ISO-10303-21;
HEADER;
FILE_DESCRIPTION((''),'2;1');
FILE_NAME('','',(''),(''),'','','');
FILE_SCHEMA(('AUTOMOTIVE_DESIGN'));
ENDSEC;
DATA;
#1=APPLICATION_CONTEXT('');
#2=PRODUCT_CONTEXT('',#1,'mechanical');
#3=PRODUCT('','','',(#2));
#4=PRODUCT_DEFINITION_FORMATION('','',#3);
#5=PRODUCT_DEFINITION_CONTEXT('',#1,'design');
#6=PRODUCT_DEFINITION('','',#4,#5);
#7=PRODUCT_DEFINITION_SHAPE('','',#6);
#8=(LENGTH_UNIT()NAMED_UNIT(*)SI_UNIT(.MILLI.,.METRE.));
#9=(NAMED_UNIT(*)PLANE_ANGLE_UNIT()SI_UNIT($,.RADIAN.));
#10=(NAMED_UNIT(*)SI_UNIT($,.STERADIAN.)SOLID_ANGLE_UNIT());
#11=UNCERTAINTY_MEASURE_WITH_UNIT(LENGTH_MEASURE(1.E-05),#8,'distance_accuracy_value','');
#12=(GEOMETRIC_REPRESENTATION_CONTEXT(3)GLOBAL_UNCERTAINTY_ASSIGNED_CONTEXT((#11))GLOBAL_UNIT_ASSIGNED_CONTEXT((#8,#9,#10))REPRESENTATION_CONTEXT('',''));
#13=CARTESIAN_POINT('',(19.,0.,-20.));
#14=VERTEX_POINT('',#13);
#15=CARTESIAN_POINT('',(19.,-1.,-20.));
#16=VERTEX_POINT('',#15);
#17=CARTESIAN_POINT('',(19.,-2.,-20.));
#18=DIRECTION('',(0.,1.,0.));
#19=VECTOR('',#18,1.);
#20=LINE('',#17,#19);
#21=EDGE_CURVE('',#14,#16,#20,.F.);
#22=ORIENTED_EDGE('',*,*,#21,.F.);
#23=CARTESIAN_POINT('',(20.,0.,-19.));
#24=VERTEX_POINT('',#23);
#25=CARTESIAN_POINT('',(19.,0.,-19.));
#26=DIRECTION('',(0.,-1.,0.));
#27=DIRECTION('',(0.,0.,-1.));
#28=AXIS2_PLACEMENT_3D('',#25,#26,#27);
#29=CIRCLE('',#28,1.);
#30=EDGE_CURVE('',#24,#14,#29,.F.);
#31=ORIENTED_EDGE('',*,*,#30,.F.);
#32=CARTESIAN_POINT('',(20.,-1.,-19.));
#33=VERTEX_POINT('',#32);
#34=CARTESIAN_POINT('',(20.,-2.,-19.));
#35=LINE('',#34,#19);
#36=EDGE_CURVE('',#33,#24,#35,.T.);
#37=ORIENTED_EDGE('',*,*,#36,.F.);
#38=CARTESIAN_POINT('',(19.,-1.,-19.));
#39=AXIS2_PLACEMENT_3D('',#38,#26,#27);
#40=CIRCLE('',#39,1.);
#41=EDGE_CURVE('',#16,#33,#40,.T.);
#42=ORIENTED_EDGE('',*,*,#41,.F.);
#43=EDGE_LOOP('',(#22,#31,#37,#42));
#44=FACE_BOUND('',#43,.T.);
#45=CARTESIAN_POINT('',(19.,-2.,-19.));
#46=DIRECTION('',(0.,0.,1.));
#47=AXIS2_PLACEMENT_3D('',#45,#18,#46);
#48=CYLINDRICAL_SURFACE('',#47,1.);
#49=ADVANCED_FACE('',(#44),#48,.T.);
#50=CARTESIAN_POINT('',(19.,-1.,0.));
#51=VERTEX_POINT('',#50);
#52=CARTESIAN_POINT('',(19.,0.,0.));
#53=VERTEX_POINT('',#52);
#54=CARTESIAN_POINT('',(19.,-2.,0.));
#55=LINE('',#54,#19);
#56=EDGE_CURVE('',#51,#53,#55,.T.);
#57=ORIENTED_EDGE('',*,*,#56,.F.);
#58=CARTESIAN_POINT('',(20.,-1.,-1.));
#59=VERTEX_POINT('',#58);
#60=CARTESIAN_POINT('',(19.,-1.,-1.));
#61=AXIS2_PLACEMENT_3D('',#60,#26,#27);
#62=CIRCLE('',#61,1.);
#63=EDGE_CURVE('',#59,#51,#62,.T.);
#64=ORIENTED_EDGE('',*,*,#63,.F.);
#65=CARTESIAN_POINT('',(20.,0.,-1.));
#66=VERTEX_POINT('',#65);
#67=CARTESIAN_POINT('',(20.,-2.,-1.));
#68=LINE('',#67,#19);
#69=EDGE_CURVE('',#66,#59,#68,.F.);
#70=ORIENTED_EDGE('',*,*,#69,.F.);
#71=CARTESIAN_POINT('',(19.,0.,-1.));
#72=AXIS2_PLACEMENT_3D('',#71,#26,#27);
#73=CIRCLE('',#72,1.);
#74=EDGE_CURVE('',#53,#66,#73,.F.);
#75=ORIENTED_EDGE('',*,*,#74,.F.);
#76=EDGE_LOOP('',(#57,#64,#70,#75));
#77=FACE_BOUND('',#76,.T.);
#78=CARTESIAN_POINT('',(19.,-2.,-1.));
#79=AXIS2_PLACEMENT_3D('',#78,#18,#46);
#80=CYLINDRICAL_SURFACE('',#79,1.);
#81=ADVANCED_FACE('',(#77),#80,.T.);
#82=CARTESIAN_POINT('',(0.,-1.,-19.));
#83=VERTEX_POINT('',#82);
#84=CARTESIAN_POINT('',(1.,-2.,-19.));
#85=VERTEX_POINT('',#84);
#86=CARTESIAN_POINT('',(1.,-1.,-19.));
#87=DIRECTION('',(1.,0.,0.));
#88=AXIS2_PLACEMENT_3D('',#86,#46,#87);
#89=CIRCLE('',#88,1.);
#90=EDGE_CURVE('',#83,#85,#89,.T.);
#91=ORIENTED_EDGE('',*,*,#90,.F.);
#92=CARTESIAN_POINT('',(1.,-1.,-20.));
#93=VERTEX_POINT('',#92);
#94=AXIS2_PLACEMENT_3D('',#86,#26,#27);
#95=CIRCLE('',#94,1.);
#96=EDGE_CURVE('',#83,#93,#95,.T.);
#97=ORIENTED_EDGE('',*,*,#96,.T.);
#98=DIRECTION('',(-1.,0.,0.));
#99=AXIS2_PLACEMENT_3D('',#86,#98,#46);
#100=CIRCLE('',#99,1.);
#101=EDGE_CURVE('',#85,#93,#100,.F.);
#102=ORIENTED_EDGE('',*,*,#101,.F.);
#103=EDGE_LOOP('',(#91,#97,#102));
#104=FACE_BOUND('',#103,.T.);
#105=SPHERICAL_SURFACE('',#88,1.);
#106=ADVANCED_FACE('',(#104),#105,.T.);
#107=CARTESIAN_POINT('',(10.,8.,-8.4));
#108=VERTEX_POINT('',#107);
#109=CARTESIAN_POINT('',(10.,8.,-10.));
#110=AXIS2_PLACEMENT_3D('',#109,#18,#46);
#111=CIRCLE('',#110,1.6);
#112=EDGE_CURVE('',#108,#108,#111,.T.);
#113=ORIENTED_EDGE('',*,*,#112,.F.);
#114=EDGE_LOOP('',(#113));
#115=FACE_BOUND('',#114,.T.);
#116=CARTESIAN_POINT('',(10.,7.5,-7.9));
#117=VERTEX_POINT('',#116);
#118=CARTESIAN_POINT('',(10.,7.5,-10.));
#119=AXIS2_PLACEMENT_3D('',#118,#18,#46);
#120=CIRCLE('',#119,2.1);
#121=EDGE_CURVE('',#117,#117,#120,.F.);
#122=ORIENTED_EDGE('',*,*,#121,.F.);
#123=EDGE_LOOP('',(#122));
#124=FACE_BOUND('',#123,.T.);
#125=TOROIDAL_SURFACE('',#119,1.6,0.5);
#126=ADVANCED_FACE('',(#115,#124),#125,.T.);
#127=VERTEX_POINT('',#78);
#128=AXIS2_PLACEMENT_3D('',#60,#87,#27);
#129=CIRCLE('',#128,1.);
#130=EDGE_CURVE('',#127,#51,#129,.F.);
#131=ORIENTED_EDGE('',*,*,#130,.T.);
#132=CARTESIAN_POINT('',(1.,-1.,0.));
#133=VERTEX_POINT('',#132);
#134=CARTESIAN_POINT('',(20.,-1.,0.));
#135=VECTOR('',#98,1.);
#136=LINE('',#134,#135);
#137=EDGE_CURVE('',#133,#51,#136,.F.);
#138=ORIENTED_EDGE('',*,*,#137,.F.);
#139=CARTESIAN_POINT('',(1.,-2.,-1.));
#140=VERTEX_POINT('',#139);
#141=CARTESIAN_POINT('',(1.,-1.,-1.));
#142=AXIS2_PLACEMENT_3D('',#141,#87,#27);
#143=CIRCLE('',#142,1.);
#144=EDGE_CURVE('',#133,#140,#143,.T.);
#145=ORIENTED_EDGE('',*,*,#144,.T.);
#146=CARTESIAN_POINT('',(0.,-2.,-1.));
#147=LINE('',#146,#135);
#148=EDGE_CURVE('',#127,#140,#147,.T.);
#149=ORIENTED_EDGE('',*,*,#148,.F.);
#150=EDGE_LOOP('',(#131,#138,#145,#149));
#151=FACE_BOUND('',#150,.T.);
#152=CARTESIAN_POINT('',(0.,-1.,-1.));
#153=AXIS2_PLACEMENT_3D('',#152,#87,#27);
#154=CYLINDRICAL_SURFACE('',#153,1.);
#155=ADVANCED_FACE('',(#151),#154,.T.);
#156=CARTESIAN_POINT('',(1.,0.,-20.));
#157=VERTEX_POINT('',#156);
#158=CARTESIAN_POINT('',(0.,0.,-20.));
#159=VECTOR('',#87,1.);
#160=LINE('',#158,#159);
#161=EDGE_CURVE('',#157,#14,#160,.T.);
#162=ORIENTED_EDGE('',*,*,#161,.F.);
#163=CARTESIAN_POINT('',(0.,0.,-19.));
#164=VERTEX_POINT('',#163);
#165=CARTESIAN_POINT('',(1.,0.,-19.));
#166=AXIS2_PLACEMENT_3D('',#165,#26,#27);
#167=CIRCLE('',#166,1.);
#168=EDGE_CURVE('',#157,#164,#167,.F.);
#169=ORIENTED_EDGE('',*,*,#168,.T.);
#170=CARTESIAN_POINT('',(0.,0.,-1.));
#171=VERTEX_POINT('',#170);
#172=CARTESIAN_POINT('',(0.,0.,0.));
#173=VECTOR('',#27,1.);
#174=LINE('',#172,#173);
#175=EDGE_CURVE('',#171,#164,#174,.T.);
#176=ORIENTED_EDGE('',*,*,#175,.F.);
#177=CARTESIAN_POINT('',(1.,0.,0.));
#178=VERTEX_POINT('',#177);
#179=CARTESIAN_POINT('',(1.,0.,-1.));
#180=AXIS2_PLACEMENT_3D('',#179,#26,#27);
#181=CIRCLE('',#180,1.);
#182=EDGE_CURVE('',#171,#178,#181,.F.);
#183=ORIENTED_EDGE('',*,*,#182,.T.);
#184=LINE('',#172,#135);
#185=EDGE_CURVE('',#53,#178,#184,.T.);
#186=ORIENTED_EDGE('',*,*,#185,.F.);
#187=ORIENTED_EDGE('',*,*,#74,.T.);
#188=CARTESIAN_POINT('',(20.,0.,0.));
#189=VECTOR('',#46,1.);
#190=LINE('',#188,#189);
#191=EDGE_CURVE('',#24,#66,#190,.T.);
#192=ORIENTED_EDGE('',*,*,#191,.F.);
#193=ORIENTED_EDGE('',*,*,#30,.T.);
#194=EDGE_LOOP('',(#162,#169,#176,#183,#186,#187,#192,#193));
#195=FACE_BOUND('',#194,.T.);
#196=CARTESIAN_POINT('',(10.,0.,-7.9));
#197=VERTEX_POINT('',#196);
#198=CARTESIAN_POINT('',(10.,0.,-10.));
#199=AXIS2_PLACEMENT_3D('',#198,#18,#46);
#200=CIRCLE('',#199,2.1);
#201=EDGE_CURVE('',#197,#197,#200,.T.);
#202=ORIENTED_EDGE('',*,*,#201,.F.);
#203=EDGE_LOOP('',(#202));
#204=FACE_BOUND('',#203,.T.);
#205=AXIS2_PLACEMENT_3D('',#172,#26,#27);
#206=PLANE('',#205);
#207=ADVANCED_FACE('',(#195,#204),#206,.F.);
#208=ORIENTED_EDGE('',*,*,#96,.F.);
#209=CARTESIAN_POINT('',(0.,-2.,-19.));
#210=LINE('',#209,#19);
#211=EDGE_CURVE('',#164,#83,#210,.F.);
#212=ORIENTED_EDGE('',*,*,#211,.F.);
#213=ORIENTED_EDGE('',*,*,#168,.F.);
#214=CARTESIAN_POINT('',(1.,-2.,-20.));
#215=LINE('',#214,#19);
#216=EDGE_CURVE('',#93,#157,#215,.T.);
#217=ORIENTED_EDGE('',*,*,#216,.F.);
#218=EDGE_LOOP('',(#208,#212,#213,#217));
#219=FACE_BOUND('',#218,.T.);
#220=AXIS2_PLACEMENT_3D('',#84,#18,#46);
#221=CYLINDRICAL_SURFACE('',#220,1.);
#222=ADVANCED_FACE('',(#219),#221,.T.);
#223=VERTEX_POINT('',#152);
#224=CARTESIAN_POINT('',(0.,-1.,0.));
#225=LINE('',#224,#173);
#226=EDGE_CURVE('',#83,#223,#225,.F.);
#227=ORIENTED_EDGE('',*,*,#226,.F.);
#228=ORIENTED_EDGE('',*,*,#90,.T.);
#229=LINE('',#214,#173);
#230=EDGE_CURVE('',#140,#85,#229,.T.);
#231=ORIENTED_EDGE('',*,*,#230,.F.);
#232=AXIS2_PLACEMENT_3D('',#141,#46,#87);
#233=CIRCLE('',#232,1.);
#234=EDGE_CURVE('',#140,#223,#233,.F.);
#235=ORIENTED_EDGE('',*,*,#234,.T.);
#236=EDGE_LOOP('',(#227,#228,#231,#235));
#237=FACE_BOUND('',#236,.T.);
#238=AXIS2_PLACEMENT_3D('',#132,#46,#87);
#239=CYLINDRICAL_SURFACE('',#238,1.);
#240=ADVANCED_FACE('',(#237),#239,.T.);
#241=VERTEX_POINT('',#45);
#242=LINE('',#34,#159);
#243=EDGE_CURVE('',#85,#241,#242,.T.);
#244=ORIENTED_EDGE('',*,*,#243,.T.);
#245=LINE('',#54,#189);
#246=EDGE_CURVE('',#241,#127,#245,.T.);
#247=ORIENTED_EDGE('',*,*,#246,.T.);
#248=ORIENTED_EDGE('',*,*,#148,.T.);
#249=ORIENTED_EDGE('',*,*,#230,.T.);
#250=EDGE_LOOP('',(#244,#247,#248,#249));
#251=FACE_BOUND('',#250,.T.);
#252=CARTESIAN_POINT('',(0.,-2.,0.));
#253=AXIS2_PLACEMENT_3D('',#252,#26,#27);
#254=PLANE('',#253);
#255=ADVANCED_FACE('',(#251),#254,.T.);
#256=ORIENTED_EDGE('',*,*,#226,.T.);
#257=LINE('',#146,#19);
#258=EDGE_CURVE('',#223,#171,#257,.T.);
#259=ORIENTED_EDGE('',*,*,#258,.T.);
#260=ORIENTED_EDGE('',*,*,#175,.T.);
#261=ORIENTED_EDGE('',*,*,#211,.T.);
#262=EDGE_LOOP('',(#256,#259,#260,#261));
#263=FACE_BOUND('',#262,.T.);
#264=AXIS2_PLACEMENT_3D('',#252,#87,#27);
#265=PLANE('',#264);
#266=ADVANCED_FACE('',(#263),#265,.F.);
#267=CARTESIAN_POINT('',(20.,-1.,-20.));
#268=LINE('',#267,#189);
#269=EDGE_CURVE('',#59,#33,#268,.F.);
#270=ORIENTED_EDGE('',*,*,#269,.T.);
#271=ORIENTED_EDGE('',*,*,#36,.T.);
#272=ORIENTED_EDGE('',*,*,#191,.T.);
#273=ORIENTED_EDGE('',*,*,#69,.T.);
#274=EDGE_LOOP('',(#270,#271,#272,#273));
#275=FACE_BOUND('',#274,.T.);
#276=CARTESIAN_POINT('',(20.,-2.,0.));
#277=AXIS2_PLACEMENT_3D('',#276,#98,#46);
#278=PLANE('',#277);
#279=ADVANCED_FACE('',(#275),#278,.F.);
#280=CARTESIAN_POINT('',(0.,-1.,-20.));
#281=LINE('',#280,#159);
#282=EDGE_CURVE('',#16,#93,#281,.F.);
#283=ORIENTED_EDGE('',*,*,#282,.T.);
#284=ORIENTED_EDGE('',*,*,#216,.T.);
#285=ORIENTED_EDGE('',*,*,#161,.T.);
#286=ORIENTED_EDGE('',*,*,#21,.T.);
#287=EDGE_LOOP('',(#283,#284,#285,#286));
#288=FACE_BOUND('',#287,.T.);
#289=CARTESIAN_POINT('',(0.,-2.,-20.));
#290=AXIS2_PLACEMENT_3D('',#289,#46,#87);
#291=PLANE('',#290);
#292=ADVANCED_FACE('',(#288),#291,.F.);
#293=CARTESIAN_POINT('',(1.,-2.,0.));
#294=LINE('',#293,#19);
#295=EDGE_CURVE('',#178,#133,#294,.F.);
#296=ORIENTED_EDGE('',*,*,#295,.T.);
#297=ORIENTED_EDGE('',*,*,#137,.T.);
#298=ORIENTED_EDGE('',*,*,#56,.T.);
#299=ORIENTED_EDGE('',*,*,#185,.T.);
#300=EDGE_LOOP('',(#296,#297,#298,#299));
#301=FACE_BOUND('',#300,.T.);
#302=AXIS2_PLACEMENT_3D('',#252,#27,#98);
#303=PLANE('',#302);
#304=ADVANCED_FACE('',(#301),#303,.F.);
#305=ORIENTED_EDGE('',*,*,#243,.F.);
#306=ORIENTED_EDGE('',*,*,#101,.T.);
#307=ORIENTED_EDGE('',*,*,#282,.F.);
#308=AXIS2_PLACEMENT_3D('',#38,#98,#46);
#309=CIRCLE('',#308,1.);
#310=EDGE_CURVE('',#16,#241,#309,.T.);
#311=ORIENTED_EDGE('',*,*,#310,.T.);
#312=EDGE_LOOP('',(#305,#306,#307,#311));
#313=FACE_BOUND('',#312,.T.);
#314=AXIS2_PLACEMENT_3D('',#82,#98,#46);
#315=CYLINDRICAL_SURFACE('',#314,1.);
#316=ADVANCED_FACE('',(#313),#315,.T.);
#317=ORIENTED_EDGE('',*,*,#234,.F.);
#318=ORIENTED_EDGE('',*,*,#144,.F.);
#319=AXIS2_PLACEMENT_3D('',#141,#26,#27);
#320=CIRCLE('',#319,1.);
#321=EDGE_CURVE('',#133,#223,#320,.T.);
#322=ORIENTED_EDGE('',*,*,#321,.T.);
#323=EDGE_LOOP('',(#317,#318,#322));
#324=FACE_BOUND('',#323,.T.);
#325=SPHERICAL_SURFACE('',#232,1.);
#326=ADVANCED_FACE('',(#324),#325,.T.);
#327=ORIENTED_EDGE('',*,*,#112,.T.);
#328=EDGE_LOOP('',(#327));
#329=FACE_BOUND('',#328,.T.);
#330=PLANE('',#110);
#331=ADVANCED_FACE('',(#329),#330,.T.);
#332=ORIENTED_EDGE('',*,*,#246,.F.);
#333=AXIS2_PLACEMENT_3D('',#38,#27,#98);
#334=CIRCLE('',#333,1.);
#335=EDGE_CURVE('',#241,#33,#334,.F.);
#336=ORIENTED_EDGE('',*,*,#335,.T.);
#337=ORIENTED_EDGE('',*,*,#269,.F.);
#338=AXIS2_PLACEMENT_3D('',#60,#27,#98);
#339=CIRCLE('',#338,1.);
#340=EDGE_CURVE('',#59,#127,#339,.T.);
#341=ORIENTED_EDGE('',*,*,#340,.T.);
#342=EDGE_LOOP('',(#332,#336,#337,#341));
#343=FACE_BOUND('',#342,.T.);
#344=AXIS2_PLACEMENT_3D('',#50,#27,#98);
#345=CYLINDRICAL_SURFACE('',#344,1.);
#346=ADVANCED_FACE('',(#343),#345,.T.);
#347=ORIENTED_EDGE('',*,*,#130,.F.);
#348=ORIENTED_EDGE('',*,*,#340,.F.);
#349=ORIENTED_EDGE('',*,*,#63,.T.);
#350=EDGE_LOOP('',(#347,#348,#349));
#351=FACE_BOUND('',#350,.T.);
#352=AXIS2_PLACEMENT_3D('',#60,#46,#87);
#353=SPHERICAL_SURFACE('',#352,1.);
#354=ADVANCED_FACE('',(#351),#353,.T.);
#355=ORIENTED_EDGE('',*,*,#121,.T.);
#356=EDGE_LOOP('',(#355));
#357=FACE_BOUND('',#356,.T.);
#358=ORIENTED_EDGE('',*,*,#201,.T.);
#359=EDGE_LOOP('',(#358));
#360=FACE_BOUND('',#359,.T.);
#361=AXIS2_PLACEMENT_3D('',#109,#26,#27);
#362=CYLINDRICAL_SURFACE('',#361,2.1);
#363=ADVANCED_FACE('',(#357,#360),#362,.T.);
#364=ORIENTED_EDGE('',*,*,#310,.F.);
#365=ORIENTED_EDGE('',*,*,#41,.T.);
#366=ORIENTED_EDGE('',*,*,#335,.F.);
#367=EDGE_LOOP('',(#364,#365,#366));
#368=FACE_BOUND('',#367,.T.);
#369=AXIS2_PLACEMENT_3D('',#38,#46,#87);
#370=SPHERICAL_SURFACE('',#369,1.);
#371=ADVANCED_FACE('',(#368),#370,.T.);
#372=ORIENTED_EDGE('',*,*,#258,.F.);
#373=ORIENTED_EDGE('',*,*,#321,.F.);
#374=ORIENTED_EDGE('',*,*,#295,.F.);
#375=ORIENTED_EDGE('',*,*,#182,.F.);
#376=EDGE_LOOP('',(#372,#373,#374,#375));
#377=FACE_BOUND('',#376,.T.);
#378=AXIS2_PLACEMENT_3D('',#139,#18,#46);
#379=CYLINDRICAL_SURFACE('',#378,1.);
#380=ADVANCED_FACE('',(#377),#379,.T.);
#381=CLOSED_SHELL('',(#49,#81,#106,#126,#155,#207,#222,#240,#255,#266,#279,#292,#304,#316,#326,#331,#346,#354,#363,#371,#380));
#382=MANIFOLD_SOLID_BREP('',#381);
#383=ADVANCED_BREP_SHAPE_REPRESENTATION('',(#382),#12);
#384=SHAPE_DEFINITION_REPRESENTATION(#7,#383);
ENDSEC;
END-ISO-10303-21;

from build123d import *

# Parameters (mm, degrees)
SKETCH1_R           = 2.1
BOSS_EXTRUDE1_DEPTH = 8
SKETCH2_W           = 20
SKETCH2_H           = 20
BOSS_EXTRUDE2_DEPTH = 2
FILLET1_R           = 1
FILLET2_R           = 0.5
FILLET3_R           = 1


with BuildPart() as part:
    # Sketch1 → Boss-Extrude1 (new body)
    with BuildSketch(Plane(origin=(0, 0, 0), x_dir=(1, 0, 0), z_dir=(0, 1, 0))):
        with Locations(Location((10, 10, 0), (0, 0, 270))):
            Circle(SKETCH1_R)
    extrude(amount=BOSS_EXTRUDE1_DEPTH)

    # Sketch2 → Boss-Extrude2 (add)
    with BuildSketch(Plane.XZ):
        with Locations((10, -10)):
            Rectangle(SKETCH2_W, SKETCH2_H)
    extrude(amount=BOSS_EXTRUDE2_DEPTH)

    # Fillet1
    fillet1_edges = [part.edges().sort_by_distance(p)[0] for p in [
        (0, -2, -10),
        (10, -2, -20),
        (20, -2, -10),
        (10, -2, 0),
    ]]
    fillet(fillet1_edges, radius=FILLET1_R)

    # Fillet2
    fillet2_edges = [part.edges().sort_by_distance(p)[0] for p in [
        (10, 8, -12.1),
    ]]
    fillet(fillet2_edges, radius=FILLET2_R)

    # Fillet3
    # the kernel refuses this fillet: 1 mm, written as the material it takes off along each edge
    with BuildSketch(Plane(origin=(19, -1, -19), x_dir=(0, 0, -1), z_dir=(1, 0, 0))) as fillet3_piece_1_section:
        Polygon((0, 0), (FILLET3_R, 0), (FILLET3_R, -FILLET3_R), (0, -FILLET3_R), align=None)
    fillet3_piece_1 = extrude(amount=FILLET3_R, mode=Mode.PRIVATE)
    fillet3_piece_1 = fillet3_piece_1 - Plane(origin=(19, -1, -19), x_dir=(0, 0.7071067811865475, 0.7071067811865475), z_dir=(1, 0, 0)) * Sphere(FILLET3_R, mode=Mode.PRIVATE)
    add(fillet3_piece_1, mode=Mode.SUBTRACT)
    with BuildSketch(Plane(origin=(1, -1, -19), x_dir=(0, 0, -1), z_dir=(-1, 0, 0))) as fillet3_piece_2_section:
        Polygon((0, 0), (FILLET3_R, 0), (FILLET3_R, FILLET3_R), (0, FILLET3_R), align=None)
    fillet3_piece_2 = extrude(amount=FILLET3_R, mode=Mode.PRIVATE)
    fillet3_piece_2 = fillet3_piece_2 - Plane(origin=(1, -1, -19), x_dir=(0, 0.7071067811865475, 0.7071067811865475), z_dir=(-1, 0, 0)) * Sphere(FILLET3_R, mode=Mode.PRIVATE)
    add(fillet3_piece_2, mode=Mode.SUBTRACT)
    with BuildSketch(Plane(origin=(19, -1, -1), x_dir=(1, 0, 0), z_dir=(0, 0, 1))) as fillet3_piece_3_section:
        Polygon((0, 0), (FILLET3_R, 0), (FILLET3_R, -FILLET3_R), (0, -FILLET3_R), align=None)
    fillet3_piece_3 = extrude(amount=FILLET3_R, mode=Mode.PRIVATE)
    fillet3_piece_3 = fillet3_piece_3 - Plane(origin=(19, -1, -1), x_dir=(-0.7071067811865475, 0.7071067811865475, 0), z_dir=(0, 0, 1)) * Sphere(FILLET3_R, mode=Mode.PRIVATE)
    add(fillet3_piece_3, mode=Mode.SUBTRACT)
    with BuildSketch(Plane(origin=(1, -1, -1), x_dir=(-1, 0, 0), z_dir=(0, 0, 1))) as fillet3_piece_4_section:
        Polygon((0, 0), (FILLET3_R, 0), (FILLET3_R, FILLET3_R), (0, FILLET3_R), align=None)
    fillet3_piece_4 = extrude(amount=FILLET3_R, mode=Mode.PRIVATE)
    fillet3_piece_4 = fillet3_piece_4 - Plane(origin=(1, -1, -1), x_dir=(0.7071067811865475, 0.7071067811865475, 0), z_dir=(0, 0, 1)) * Sphere(FILLET3_R, mode=Mode.PRIVATE)
    add(fillet3_piece_4, mode=Mode.SUBTRACT)
    with BuildSketch(Plane(origin=(0, 2.5, 0), x_dir=(1, 0, 0), z_dir=(0, -1, 0)), Plane(origin=(0, 2.5, -20), x_dir=(0, 0, 1), z_dir=(0, -1, 0))) as fillet3_piece_5:
        with BuildLine():
            CenterArc((FILLET3_R, -FILLET3_R), FILLET3_R, 90, 90)
            Line((0, -FILLET3_R), (0, 0))
            Line((0, 0), (FILLET3_R, 0))
        make_face()
    extrude(amount=3.5, mode=Mode.SUBTRACT)
    with BuildSketch(Plane(origin=(20, 2.5, 0), x_dir=(-1, 0, 0), z_dir=(0, -1, 0)), Plane(origin=(20, 2.5, -20), x_dir=(0, 0, 1), z_dir=(0, -1, 0))) as fillet3_piece_6:
        with BuildLine():
            CenterArc((FILLET3_R, FILLET3_R), FILLET3_R, 180, 90)
            Line((0, FILLET3_R), (0, 0))
            Line((0, 0), (FILLET3_R, 0))
        make_face()
    extrude(amount=3.5, mode=Mode.SUBTRACT)


solid = part.part
